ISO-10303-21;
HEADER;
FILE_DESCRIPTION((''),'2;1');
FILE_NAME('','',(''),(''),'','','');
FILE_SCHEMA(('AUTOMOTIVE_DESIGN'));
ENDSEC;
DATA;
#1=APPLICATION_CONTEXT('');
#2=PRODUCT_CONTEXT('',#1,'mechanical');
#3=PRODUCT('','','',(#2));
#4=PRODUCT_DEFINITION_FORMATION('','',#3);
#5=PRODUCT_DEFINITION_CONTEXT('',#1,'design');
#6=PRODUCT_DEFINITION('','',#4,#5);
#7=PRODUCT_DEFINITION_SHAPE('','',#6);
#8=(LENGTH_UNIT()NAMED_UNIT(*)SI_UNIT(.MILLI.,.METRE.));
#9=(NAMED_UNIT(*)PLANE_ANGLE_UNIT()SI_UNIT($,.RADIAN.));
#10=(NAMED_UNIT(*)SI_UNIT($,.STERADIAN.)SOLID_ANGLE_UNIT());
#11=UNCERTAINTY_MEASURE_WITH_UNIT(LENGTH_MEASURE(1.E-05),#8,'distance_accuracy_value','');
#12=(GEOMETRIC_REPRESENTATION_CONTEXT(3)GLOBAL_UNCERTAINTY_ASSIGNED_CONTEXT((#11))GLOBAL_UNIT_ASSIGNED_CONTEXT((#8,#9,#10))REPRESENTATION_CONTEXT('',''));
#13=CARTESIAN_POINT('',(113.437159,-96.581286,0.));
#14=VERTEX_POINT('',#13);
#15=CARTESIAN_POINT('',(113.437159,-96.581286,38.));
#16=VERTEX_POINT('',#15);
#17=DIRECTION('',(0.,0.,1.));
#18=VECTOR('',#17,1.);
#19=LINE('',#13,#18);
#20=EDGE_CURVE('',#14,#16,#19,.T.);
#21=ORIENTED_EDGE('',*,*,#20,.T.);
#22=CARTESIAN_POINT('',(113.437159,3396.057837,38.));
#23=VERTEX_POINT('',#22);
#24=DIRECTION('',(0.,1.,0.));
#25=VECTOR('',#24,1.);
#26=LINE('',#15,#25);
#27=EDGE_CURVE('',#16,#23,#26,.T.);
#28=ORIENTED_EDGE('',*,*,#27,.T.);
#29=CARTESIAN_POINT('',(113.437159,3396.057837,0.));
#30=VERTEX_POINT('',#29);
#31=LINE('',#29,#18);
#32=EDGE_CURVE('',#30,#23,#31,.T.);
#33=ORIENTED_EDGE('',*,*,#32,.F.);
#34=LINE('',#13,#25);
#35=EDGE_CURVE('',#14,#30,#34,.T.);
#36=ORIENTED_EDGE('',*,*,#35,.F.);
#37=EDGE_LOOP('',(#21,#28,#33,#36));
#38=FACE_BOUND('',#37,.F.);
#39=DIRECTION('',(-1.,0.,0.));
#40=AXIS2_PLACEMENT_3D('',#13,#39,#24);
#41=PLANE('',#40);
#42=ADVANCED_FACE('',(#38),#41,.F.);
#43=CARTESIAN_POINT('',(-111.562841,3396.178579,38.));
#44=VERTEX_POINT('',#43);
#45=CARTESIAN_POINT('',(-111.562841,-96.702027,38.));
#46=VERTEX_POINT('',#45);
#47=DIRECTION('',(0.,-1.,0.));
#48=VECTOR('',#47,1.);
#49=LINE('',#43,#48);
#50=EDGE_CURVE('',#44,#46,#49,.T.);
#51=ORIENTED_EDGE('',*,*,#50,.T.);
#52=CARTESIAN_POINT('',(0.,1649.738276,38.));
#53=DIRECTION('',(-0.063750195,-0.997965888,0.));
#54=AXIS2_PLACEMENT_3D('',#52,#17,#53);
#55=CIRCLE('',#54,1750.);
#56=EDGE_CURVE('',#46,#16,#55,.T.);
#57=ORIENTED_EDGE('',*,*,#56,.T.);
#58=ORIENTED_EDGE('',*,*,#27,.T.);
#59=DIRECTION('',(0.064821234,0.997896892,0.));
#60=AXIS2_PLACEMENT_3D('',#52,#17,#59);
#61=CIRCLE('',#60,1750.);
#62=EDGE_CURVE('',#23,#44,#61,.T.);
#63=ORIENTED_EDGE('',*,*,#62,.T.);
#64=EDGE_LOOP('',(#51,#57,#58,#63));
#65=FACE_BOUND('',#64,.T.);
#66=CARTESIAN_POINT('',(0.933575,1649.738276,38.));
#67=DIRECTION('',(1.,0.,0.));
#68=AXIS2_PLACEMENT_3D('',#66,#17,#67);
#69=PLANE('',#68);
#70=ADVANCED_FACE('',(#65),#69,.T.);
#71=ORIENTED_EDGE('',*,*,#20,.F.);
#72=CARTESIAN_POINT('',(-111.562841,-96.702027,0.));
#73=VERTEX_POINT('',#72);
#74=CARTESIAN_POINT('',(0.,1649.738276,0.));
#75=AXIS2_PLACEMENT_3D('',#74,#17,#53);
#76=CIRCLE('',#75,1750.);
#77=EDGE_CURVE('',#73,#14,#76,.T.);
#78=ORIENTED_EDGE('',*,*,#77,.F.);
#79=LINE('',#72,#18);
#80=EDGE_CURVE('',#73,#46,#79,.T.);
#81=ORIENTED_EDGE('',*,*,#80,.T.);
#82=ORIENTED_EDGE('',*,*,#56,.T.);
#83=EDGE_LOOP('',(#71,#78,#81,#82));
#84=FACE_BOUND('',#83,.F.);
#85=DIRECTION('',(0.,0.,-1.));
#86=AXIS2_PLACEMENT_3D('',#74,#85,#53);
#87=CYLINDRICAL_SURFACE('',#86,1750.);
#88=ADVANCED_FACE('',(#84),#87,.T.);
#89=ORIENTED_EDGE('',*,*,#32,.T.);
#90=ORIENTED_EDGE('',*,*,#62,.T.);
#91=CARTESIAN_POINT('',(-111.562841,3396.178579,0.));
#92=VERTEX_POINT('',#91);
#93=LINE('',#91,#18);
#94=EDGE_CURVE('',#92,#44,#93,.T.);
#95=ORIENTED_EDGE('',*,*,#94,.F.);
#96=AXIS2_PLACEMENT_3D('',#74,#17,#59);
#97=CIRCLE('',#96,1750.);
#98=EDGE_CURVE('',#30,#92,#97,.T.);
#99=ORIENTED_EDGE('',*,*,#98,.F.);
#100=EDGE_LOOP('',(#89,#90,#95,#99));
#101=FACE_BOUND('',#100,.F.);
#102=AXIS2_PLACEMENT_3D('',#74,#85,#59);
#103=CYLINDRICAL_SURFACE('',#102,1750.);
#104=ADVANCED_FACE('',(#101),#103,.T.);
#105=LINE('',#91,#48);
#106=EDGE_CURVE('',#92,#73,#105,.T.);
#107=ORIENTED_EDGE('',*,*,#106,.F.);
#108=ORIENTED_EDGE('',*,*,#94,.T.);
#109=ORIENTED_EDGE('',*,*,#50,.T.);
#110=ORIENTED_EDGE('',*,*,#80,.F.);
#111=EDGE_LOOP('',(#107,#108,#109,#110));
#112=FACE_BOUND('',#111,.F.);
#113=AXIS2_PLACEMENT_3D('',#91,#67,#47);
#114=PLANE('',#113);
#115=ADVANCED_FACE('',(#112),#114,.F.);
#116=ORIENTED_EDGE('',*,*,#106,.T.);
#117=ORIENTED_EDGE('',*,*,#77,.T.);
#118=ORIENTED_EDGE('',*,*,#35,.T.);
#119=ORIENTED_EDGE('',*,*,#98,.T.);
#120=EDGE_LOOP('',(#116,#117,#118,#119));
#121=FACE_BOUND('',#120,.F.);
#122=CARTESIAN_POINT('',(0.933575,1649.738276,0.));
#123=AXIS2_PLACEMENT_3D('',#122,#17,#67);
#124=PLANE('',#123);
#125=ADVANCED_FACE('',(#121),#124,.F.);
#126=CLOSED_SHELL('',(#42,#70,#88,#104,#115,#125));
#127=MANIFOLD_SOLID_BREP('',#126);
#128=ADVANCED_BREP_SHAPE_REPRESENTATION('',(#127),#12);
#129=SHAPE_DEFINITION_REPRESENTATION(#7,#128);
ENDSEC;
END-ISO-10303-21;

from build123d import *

# Parameters (mm, degrees)
F1_DEPTH = 38


# Not quite as in the source:
# - a feature names something its author has since deleted; it is built from what else it names


with BuildPart() as f1:
    # F0 (on Top) → F1 (new body)
    with BuildSketch(Plane.XY):
        with BuildLine():
            ThreePointArc((113.4371591732, 3396.0578373807), (0.9391016735, 3399.738023894), (-111.5628408268, 3396.1785790418))
            Line((-111.5628408268, 3396.1785790418), (-111.5628408268, -96.702027304))
            ThreePointArc((-111.5628408268, -96.702027304), (0.9391016735, -100.2614721563), (113.4371591732, -96.5812856429))
            Line((113.4371591732, -96.5812856429), (113.4371591732, 3396.0578373807))
        make_face()
    extrude(amount=F1_DEPTH)


solid = f1.part
